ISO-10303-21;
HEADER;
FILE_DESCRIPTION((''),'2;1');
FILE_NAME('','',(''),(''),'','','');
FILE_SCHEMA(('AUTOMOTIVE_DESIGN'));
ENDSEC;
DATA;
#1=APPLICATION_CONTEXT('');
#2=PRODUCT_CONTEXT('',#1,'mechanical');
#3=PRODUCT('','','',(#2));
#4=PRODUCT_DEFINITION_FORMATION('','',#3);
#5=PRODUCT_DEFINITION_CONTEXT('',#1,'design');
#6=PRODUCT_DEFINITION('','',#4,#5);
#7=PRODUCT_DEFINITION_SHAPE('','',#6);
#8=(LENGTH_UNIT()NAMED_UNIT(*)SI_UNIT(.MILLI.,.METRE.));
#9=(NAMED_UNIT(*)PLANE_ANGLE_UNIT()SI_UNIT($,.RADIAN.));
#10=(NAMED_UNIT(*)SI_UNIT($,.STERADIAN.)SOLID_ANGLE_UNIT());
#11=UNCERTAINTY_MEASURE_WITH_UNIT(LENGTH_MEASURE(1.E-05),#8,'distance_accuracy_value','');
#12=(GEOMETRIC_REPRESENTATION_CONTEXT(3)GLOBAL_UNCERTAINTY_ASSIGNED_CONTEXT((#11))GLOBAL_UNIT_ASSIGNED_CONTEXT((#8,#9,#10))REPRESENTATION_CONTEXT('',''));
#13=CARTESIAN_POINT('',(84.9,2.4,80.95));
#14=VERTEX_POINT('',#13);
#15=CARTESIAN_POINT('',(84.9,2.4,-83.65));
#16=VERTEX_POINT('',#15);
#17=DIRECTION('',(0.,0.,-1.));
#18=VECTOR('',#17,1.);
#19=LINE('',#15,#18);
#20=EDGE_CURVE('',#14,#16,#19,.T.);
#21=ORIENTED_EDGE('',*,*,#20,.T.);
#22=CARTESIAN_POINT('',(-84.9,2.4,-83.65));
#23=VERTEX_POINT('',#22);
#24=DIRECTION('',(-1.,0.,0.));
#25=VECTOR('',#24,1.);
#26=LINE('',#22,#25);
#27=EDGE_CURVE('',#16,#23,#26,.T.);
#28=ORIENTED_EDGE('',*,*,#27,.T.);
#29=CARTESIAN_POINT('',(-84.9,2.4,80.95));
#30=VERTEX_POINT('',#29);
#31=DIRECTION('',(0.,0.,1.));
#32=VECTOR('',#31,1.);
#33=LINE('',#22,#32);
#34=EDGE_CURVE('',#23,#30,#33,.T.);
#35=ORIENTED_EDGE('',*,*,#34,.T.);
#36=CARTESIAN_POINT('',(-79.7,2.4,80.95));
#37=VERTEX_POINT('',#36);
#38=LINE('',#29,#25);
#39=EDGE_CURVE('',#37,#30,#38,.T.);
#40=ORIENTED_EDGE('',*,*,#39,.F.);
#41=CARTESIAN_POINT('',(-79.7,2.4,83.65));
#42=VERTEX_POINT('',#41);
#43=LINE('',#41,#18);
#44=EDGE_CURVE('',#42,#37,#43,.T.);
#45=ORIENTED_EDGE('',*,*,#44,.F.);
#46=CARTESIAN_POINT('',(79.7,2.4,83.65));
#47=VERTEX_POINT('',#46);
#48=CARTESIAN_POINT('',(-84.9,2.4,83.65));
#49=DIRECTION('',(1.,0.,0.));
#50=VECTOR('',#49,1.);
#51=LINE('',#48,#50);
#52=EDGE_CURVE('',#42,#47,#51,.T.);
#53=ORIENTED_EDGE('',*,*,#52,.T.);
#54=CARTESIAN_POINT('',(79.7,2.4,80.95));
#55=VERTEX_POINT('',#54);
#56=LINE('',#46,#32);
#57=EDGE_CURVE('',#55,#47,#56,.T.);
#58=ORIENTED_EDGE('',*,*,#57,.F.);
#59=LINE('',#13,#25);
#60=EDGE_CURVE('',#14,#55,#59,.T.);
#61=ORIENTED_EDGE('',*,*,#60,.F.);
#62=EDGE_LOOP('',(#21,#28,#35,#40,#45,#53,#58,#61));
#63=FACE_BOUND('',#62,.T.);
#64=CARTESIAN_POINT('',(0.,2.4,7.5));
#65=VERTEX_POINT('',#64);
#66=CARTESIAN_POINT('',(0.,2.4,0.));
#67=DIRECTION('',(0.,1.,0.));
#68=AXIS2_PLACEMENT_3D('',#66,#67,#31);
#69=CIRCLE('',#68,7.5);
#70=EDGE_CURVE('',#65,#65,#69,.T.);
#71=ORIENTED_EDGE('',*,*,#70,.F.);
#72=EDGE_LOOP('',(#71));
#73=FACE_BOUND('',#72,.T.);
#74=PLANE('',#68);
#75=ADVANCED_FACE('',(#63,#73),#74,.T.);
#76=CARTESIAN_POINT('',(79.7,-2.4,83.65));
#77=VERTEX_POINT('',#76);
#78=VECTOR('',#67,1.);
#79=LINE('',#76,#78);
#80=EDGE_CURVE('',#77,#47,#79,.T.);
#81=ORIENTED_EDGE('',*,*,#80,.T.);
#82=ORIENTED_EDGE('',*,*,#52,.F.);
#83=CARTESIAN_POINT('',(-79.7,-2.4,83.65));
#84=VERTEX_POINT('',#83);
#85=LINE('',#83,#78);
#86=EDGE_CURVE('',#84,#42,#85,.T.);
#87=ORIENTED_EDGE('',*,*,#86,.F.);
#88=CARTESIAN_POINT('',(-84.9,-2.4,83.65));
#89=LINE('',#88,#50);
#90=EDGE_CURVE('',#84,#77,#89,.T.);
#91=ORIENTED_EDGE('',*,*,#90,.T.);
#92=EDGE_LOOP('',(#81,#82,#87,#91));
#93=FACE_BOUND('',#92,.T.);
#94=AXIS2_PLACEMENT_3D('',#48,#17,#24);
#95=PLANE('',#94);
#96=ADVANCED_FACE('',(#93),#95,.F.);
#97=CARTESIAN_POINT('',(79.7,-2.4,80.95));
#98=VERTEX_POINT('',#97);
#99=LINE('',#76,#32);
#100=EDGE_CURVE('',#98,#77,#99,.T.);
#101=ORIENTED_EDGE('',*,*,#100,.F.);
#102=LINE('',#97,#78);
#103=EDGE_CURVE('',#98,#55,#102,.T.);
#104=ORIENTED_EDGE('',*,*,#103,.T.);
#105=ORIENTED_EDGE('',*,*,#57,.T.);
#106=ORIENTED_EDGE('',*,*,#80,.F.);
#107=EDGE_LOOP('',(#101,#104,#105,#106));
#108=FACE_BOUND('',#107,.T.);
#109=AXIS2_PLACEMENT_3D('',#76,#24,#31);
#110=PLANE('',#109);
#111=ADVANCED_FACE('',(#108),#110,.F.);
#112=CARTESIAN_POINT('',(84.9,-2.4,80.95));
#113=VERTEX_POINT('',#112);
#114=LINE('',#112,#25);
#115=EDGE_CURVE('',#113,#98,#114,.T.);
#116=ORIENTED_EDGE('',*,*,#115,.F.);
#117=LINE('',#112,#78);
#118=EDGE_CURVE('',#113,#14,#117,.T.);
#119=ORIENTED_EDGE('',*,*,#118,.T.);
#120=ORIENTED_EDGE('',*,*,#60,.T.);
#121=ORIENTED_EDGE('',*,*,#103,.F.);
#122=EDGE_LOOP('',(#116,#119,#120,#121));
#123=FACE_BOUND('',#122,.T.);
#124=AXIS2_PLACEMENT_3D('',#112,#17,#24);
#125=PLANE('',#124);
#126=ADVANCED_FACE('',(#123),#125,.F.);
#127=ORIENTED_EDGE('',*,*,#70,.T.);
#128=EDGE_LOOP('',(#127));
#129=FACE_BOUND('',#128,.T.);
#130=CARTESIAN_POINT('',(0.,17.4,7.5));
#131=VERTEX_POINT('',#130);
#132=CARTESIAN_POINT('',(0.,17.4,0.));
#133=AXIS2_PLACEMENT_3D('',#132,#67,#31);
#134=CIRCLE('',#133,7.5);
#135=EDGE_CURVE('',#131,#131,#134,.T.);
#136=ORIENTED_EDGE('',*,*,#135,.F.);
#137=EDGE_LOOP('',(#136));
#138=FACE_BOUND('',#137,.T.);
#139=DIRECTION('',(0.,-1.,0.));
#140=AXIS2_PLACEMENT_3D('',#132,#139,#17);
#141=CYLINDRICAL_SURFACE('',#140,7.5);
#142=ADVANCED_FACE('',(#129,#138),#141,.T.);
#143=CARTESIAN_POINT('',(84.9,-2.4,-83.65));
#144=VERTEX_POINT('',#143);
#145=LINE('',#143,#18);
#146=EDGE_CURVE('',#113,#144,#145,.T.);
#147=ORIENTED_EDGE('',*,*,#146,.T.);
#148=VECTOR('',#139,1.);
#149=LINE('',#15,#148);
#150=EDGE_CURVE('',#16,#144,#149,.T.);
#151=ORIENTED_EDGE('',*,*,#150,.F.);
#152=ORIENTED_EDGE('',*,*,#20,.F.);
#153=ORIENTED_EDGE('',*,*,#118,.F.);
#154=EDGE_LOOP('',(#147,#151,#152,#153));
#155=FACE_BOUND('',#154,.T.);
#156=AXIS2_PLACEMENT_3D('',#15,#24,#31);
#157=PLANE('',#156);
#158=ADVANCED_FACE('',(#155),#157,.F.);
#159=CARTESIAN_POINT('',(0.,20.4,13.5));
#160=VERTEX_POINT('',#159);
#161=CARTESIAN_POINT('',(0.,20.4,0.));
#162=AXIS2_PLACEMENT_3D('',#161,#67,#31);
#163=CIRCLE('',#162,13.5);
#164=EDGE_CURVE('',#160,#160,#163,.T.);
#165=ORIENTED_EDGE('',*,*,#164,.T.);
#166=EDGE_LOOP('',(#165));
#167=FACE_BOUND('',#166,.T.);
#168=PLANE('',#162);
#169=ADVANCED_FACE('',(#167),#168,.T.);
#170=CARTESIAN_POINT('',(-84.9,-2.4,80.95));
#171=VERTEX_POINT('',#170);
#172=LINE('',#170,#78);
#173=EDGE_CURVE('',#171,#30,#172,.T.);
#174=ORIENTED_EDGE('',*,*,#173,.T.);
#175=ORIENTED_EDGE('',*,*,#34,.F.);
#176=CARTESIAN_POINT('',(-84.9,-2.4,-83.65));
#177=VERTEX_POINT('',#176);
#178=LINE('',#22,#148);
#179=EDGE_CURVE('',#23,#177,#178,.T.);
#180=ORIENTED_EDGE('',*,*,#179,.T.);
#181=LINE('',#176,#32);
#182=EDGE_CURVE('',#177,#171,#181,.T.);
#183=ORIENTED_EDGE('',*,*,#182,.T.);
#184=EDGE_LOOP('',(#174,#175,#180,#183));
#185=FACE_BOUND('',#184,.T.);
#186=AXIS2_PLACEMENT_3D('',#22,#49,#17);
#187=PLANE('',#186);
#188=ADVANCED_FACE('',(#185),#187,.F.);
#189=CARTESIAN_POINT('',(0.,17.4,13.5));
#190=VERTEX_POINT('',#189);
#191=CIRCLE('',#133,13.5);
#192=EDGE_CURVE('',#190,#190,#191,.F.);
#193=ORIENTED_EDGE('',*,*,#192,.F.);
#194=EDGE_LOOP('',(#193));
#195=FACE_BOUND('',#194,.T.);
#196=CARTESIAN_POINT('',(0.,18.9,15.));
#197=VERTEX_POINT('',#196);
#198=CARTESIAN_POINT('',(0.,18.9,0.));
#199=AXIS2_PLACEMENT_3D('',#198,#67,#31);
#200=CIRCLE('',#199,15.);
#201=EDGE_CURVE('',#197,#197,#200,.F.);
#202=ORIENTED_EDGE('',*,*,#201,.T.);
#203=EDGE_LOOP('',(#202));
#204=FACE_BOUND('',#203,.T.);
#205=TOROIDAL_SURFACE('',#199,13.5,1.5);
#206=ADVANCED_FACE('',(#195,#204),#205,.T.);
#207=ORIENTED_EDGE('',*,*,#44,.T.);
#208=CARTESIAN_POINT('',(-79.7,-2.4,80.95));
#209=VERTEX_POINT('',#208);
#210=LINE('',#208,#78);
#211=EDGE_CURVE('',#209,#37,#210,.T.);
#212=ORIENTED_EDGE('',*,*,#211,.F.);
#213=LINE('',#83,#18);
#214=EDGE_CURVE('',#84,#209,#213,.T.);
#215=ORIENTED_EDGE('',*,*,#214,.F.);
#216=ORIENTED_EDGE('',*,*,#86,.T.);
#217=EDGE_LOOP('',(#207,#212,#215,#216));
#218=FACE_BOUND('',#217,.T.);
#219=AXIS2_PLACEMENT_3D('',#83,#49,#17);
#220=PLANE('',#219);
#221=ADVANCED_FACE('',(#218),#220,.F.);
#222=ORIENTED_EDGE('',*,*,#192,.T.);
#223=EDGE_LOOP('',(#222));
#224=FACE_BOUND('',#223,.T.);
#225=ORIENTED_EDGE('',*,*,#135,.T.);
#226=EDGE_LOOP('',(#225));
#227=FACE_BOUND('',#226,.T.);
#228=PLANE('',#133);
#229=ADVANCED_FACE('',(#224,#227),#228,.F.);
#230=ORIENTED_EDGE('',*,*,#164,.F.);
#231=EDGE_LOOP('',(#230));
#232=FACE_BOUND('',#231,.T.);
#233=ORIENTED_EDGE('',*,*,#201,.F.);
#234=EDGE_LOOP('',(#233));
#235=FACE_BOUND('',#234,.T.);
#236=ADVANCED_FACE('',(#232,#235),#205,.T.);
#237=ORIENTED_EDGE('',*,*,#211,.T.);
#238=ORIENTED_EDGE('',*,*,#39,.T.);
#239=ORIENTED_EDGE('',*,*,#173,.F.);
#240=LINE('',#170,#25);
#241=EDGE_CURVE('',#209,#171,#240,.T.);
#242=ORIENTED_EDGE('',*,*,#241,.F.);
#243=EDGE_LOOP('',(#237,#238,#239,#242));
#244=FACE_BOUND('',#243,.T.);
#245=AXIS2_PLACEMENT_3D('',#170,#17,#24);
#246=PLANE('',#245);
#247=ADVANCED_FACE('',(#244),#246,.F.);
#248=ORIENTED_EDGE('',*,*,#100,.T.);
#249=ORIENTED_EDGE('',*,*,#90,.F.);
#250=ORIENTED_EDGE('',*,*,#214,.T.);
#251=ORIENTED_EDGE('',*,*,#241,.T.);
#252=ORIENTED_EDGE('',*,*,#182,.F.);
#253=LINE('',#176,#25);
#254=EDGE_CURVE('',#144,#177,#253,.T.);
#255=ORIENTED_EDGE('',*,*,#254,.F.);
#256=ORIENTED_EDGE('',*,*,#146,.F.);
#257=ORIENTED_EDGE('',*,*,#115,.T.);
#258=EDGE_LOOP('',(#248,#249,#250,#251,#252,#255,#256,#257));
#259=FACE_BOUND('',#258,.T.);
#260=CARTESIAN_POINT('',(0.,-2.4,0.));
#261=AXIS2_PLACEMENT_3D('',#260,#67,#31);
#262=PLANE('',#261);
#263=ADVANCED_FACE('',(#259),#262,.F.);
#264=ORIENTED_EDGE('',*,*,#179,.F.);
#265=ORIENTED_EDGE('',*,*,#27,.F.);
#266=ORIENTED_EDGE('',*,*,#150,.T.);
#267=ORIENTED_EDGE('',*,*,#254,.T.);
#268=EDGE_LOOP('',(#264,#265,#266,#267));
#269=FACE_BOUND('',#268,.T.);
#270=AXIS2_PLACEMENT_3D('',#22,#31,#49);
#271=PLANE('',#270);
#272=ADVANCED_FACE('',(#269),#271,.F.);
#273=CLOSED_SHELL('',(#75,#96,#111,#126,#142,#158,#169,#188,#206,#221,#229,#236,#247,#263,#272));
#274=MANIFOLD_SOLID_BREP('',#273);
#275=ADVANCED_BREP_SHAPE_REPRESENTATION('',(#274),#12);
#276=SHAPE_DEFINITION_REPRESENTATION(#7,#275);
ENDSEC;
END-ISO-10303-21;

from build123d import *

# Parameters (mm, degrees)
SKETCH1_W           = 169.8
SKETCH1_H           = 167.3
BOSS_EXTRUDE1_DEPTH = 2.4
SKETCH2_R           = 7.5
BOSS_EXTRUDE2_DEPTH = 15
SKETCH6_R           = 15
BOSS_EXTRUDE4_DEPTH = 3
SKETCH7_W           = 5.2
SKETCH7_H           = 2.7
CUT_EXTRUDE1_DEPTH  = 121.537680831
FILLET2_R           = 1.5


with BuildPart() as part:
    # Sketch1 → Boss-Extrude1 (new, symmetric)
    with BuildSketch(Plane(origin=(0, 0, 0), x_dir=(1, 0, 0), z_dir=(0, 1, 0))):
        Rectangle(SKETCH1_W, SKETCH1_H)
    extrude(amount=BOSS_EXTRUDE1_DEPTH, both=True)

    # Sketch2 → Boss-Extrude2 (add)
    with BuildSketch(Plane(origin=(0, 2.4, 0), x_dir=(1, 0, 0), z_dir=(0, 1, 0))):
        with Locations(Location((0, 0, 0), (0, 0, 270))):
            Circle(SKETCH2_R)
    extrude(amount=BOSS_EXTRUDE2_DEPTH)

    # Sketch6 → Boss-Extrude4 (add)
    with BuildSketch(Plane(origin=(0, 17.4, 0), x_dir=(1, 0, 0), z_dir=(0, 1, 0))):
        with Locations(Location((0, 0, 0), (0, 0, 270))):
            Circle(SKETCH6_R)
    extrude(amount=BOSS_EXTRUDE4_DEPTH)

    # Sketch7 → Cut-Extrude1 (cut, through all)
    with BuildSketch(Plane(origin=(0, 2.4, 0), x_dir=(1, 0, 0), z_dir=(0, 1, 0))):
        with Locations((-82.3, -82.3)):
            Rectangle(SKETCH7_W, SKETCH7_H)
        with Locations((82.3, -82.3)):
            Rectangle(SKETCH7_W, SKETCH7_H)
    extrude(amount=-CUT_EXTRUDE1_DEPTH, mode=Mode.SUBTRACT)

    # Fillet2
    fillet2_edges = [part.edges().sort_by_distance(p)[0] for p in [
        (0, 17.4, -15),
        (0, 20.4, -15),
    ]]
    fillet(fillet2_edges, radius=FILLET2_R - 0.0001)  # a hair under: the kernel refuses the full size


solid = part.part
